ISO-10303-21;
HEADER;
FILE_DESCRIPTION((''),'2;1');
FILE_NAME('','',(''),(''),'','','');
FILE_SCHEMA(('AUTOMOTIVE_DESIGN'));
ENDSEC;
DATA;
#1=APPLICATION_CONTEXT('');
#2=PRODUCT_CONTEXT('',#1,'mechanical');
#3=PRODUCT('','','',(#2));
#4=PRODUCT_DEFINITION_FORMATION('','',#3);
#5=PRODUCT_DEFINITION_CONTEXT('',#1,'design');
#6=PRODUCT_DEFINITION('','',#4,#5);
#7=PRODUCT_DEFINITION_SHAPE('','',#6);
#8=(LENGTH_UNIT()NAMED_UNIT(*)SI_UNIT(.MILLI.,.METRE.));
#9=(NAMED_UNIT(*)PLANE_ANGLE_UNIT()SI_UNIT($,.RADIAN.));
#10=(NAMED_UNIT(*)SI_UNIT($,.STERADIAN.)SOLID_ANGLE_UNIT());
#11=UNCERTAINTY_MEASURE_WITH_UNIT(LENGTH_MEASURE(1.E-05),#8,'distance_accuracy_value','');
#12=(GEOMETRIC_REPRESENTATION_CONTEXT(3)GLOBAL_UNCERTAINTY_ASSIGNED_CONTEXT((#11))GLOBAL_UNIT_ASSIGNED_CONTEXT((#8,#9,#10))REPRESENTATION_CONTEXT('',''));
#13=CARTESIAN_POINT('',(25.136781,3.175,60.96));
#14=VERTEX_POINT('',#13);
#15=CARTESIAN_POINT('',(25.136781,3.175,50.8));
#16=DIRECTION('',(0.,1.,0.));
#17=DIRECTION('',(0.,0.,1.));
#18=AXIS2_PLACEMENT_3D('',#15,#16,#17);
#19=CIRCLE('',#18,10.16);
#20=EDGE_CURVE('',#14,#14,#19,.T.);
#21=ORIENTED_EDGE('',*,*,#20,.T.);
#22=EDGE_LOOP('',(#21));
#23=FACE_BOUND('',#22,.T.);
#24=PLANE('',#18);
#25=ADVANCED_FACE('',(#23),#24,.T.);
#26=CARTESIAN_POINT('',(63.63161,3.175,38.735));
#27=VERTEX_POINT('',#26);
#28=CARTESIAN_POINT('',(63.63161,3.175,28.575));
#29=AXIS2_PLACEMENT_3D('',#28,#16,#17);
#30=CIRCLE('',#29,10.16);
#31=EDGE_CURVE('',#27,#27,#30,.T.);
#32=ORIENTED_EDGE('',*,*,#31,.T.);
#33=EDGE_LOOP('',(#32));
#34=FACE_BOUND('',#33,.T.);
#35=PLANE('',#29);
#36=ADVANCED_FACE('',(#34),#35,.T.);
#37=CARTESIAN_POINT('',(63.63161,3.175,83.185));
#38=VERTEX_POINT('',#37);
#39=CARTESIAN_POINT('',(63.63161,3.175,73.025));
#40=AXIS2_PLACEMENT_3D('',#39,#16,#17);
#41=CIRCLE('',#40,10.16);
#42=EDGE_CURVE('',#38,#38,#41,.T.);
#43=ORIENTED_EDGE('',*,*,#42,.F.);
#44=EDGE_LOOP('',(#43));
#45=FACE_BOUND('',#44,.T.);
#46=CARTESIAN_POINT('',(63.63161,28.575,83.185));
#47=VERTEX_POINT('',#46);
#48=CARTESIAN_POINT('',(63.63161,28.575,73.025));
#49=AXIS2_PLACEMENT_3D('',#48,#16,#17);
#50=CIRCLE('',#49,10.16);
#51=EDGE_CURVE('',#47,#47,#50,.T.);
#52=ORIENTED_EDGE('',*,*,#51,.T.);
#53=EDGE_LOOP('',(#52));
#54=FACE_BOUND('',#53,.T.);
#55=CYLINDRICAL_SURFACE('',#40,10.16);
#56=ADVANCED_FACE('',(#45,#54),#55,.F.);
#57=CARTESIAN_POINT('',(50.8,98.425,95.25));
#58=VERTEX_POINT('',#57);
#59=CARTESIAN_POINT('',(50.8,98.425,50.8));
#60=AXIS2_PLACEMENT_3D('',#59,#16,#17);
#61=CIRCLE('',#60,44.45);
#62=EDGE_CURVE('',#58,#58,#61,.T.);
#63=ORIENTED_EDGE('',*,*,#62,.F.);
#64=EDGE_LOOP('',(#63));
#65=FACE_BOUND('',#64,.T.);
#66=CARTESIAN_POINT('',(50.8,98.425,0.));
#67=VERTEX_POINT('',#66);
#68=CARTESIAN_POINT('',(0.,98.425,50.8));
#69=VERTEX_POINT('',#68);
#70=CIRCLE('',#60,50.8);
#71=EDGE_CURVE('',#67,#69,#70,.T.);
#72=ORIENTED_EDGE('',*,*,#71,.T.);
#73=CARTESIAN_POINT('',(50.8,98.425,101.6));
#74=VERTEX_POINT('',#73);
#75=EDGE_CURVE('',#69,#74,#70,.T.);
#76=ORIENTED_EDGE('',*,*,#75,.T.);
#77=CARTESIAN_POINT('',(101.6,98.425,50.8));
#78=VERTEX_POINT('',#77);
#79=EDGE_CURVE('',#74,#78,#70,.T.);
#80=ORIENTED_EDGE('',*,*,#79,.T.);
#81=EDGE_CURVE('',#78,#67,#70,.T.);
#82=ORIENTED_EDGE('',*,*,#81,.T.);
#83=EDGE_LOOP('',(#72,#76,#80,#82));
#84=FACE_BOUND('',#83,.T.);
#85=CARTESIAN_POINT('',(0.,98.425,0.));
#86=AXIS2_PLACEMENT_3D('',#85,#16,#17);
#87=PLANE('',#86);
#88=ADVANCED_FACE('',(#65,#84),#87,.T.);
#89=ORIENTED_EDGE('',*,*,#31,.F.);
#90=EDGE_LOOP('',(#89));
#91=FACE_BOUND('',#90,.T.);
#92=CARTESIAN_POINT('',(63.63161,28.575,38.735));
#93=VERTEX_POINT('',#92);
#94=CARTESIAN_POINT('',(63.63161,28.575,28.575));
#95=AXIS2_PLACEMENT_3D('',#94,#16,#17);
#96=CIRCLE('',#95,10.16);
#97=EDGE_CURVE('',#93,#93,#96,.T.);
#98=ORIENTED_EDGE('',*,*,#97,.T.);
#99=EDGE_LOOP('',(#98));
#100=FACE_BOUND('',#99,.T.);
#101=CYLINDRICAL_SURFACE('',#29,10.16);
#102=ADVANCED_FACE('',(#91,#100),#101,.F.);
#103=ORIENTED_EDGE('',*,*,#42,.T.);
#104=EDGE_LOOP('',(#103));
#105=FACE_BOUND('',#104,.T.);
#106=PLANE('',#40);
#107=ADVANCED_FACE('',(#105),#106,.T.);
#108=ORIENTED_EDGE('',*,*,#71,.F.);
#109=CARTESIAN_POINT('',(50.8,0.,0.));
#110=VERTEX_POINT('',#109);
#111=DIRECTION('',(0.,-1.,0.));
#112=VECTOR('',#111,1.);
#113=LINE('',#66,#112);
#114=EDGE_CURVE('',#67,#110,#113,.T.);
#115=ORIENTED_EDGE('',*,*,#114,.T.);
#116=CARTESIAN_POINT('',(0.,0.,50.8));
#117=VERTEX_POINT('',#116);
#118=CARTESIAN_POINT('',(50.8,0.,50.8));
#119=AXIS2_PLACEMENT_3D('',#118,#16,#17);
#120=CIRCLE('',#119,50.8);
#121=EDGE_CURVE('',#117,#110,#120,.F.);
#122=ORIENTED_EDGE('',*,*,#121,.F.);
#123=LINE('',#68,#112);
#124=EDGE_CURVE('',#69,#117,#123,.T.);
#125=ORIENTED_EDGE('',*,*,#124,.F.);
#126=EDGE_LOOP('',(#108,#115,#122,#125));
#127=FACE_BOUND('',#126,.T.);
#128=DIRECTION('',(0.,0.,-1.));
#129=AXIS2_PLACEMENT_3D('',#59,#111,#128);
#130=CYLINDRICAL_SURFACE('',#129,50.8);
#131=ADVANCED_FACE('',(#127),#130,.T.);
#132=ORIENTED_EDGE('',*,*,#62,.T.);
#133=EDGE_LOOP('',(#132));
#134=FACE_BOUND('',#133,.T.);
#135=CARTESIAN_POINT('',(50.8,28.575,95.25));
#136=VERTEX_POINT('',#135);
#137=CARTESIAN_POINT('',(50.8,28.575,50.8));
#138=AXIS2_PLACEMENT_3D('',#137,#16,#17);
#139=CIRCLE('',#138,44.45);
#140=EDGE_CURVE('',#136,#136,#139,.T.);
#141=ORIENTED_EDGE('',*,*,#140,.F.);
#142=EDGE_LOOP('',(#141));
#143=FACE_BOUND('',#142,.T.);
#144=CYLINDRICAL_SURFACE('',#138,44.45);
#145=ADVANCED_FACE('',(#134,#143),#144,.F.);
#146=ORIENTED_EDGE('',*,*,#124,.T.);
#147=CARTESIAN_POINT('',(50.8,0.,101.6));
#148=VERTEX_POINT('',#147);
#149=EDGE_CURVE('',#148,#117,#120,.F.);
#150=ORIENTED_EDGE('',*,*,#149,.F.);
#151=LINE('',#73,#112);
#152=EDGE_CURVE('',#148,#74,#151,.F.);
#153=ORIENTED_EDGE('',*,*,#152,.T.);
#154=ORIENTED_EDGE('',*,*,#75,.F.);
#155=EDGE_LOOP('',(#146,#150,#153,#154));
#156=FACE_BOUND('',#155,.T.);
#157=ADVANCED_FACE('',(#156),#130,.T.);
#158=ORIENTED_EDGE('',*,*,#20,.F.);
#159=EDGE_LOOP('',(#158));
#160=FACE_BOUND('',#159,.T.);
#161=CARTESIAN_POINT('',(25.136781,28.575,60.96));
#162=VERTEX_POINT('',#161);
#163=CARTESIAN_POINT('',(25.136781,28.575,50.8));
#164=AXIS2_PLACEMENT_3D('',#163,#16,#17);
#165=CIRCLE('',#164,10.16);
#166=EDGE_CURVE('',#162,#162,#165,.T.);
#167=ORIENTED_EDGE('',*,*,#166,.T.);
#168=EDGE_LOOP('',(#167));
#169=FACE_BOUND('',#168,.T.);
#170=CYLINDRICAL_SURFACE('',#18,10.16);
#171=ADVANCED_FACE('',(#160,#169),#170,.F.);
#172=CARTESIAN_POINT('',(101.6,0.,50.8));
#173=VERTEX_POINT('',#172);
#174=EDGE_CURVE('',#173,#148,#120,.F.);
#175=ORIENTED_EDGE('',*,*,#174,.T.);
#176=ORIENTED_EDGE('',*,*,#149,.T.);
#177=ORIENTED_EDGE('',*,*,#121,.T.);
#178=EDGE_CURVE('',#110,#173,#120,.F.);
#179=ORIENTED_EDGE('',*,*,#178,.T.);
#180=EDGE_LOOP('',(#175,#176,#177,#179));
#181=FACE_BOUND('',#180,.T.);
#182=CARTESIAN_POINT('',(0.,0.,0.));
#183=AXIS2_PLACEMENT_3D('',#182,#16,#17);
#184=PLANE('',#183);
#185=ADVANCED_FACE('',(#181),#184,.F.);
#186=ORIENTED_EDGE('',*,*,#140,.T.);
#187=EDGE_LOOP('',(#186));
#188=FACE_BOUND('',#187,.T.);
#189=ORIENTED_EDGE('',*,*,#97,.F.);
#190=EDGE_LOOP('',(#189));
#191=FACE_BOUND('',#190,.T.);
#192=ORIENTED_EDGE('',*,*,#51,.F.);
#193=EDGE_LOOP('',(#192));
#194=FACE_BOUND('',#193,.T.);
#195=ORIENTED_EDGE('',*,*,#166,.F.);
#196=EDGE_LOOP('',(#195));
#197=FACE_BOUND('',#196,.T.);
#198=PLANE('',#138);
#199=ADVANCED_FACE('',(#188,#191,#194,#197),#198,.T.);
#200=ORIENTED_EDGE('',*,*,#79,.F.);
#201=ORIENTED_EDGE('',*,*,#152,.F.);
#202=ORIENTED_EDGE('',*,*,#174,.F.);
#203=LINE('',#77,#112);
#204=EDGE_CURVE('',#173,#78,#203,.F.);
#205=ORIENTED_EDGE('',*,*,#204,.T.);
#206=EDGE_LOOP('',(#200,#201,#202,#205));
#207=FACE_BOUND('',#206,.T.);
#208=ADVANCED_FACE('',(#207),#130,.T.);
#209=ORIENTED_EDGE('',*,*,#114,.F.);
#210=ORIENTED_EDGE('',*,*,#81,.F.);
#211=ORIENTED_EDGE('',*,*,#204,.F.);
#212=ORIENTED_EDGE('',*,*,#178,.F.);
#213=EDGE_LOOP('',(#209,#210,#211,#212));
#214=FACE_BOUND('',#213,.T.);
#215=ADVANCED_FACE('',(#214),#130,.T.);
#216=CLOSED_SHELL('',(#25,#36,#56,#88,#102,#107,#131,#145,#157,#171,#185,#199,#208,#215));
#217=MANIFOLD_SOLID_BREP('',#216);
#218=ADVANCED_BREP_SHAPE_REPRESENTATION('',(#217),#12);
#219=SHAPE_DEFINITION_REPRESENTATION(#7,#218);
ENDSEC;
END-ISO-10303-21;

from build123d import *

# Parameters (mm, degrees)
SKETCH1_W           = 101.6
SKETCH1_H           = 101.6
BOSS_EXTRUDE1_DEPTH = 98.425
SKETCH2_R           = 44.45
CUT_EXTRUDE1_DEPTH  = 69.85
SKETCH3_R           = 10.16
CUT_EXTRUDE2_DEPTH  = 25.4
FILLET1_R           = 50.8


with BuildPart() as part:
    # Sketch1 → Boss-Extrude1 (new body)
    with BuildSketch(Plane(origin=(0, 0, 0), x_dir=(1, 0, 0), z_dir=(0, 1, 0))):
        with Locations((50.8, -50.8)):
            Rectangle(SKETCH1_W, SKETCH1_H)
    extrude(amount=BOSS_EXTRUDE1_DEPTH)

    # Sketch2 → Cut-Extrude1 (cut)
    with BuildSketch(Plane(origin=(0, 98.425, 0), x_dir=(1, 0, 0), z_dir=(0, 1, 0))):
        with Locations(Location((50.8, -50.8, 0), (0, 0, 270))):
            Circle(SKETCH2_R)
    extrude(amount=-CUT_EXTRUDE1_DEPTH, mode=Mode.SUBTRACT)

    # Sketch3 → Cut-Extrude2 (cut)
    with BuildSketch(Plane(origin=(0, 28.575, 0), x_dir=(1, 0, 0), z_dir=(0, 1, 0))):
        with Locations(Location((63.631609733, -73.025, 0), (0, 0, 270))):
            Circle(SKETCH3_R)
        with Locations(Location((25.136780535, -50.8, 0), (0, 0, 270))):
            Circle(SKETCH3_R)
        with Locations(Location((63.631609733, -28.575, 0), (0, 0, 270))):
            Circle(SKETCH3_R)
    extrude(amount=-CUT_EXTRUDE2_DEPTH, mode=Mode.SUBTRACT)

    # Fillet1
    fillet1_edges = [part.edges().sort_by_distance(p)[0] for p in [
        (0, 49.2125, 101.6),
        (0, 49.2125, 0),
        (101.6, 49.2125, 0),
        (101.6, 49.2125, 101.6),
    ]]
    fillet(fillet1_edges, radius=FILLET1_R - 0.0001)  # a hair under: the kernel refuses the full size


solid = part.part
